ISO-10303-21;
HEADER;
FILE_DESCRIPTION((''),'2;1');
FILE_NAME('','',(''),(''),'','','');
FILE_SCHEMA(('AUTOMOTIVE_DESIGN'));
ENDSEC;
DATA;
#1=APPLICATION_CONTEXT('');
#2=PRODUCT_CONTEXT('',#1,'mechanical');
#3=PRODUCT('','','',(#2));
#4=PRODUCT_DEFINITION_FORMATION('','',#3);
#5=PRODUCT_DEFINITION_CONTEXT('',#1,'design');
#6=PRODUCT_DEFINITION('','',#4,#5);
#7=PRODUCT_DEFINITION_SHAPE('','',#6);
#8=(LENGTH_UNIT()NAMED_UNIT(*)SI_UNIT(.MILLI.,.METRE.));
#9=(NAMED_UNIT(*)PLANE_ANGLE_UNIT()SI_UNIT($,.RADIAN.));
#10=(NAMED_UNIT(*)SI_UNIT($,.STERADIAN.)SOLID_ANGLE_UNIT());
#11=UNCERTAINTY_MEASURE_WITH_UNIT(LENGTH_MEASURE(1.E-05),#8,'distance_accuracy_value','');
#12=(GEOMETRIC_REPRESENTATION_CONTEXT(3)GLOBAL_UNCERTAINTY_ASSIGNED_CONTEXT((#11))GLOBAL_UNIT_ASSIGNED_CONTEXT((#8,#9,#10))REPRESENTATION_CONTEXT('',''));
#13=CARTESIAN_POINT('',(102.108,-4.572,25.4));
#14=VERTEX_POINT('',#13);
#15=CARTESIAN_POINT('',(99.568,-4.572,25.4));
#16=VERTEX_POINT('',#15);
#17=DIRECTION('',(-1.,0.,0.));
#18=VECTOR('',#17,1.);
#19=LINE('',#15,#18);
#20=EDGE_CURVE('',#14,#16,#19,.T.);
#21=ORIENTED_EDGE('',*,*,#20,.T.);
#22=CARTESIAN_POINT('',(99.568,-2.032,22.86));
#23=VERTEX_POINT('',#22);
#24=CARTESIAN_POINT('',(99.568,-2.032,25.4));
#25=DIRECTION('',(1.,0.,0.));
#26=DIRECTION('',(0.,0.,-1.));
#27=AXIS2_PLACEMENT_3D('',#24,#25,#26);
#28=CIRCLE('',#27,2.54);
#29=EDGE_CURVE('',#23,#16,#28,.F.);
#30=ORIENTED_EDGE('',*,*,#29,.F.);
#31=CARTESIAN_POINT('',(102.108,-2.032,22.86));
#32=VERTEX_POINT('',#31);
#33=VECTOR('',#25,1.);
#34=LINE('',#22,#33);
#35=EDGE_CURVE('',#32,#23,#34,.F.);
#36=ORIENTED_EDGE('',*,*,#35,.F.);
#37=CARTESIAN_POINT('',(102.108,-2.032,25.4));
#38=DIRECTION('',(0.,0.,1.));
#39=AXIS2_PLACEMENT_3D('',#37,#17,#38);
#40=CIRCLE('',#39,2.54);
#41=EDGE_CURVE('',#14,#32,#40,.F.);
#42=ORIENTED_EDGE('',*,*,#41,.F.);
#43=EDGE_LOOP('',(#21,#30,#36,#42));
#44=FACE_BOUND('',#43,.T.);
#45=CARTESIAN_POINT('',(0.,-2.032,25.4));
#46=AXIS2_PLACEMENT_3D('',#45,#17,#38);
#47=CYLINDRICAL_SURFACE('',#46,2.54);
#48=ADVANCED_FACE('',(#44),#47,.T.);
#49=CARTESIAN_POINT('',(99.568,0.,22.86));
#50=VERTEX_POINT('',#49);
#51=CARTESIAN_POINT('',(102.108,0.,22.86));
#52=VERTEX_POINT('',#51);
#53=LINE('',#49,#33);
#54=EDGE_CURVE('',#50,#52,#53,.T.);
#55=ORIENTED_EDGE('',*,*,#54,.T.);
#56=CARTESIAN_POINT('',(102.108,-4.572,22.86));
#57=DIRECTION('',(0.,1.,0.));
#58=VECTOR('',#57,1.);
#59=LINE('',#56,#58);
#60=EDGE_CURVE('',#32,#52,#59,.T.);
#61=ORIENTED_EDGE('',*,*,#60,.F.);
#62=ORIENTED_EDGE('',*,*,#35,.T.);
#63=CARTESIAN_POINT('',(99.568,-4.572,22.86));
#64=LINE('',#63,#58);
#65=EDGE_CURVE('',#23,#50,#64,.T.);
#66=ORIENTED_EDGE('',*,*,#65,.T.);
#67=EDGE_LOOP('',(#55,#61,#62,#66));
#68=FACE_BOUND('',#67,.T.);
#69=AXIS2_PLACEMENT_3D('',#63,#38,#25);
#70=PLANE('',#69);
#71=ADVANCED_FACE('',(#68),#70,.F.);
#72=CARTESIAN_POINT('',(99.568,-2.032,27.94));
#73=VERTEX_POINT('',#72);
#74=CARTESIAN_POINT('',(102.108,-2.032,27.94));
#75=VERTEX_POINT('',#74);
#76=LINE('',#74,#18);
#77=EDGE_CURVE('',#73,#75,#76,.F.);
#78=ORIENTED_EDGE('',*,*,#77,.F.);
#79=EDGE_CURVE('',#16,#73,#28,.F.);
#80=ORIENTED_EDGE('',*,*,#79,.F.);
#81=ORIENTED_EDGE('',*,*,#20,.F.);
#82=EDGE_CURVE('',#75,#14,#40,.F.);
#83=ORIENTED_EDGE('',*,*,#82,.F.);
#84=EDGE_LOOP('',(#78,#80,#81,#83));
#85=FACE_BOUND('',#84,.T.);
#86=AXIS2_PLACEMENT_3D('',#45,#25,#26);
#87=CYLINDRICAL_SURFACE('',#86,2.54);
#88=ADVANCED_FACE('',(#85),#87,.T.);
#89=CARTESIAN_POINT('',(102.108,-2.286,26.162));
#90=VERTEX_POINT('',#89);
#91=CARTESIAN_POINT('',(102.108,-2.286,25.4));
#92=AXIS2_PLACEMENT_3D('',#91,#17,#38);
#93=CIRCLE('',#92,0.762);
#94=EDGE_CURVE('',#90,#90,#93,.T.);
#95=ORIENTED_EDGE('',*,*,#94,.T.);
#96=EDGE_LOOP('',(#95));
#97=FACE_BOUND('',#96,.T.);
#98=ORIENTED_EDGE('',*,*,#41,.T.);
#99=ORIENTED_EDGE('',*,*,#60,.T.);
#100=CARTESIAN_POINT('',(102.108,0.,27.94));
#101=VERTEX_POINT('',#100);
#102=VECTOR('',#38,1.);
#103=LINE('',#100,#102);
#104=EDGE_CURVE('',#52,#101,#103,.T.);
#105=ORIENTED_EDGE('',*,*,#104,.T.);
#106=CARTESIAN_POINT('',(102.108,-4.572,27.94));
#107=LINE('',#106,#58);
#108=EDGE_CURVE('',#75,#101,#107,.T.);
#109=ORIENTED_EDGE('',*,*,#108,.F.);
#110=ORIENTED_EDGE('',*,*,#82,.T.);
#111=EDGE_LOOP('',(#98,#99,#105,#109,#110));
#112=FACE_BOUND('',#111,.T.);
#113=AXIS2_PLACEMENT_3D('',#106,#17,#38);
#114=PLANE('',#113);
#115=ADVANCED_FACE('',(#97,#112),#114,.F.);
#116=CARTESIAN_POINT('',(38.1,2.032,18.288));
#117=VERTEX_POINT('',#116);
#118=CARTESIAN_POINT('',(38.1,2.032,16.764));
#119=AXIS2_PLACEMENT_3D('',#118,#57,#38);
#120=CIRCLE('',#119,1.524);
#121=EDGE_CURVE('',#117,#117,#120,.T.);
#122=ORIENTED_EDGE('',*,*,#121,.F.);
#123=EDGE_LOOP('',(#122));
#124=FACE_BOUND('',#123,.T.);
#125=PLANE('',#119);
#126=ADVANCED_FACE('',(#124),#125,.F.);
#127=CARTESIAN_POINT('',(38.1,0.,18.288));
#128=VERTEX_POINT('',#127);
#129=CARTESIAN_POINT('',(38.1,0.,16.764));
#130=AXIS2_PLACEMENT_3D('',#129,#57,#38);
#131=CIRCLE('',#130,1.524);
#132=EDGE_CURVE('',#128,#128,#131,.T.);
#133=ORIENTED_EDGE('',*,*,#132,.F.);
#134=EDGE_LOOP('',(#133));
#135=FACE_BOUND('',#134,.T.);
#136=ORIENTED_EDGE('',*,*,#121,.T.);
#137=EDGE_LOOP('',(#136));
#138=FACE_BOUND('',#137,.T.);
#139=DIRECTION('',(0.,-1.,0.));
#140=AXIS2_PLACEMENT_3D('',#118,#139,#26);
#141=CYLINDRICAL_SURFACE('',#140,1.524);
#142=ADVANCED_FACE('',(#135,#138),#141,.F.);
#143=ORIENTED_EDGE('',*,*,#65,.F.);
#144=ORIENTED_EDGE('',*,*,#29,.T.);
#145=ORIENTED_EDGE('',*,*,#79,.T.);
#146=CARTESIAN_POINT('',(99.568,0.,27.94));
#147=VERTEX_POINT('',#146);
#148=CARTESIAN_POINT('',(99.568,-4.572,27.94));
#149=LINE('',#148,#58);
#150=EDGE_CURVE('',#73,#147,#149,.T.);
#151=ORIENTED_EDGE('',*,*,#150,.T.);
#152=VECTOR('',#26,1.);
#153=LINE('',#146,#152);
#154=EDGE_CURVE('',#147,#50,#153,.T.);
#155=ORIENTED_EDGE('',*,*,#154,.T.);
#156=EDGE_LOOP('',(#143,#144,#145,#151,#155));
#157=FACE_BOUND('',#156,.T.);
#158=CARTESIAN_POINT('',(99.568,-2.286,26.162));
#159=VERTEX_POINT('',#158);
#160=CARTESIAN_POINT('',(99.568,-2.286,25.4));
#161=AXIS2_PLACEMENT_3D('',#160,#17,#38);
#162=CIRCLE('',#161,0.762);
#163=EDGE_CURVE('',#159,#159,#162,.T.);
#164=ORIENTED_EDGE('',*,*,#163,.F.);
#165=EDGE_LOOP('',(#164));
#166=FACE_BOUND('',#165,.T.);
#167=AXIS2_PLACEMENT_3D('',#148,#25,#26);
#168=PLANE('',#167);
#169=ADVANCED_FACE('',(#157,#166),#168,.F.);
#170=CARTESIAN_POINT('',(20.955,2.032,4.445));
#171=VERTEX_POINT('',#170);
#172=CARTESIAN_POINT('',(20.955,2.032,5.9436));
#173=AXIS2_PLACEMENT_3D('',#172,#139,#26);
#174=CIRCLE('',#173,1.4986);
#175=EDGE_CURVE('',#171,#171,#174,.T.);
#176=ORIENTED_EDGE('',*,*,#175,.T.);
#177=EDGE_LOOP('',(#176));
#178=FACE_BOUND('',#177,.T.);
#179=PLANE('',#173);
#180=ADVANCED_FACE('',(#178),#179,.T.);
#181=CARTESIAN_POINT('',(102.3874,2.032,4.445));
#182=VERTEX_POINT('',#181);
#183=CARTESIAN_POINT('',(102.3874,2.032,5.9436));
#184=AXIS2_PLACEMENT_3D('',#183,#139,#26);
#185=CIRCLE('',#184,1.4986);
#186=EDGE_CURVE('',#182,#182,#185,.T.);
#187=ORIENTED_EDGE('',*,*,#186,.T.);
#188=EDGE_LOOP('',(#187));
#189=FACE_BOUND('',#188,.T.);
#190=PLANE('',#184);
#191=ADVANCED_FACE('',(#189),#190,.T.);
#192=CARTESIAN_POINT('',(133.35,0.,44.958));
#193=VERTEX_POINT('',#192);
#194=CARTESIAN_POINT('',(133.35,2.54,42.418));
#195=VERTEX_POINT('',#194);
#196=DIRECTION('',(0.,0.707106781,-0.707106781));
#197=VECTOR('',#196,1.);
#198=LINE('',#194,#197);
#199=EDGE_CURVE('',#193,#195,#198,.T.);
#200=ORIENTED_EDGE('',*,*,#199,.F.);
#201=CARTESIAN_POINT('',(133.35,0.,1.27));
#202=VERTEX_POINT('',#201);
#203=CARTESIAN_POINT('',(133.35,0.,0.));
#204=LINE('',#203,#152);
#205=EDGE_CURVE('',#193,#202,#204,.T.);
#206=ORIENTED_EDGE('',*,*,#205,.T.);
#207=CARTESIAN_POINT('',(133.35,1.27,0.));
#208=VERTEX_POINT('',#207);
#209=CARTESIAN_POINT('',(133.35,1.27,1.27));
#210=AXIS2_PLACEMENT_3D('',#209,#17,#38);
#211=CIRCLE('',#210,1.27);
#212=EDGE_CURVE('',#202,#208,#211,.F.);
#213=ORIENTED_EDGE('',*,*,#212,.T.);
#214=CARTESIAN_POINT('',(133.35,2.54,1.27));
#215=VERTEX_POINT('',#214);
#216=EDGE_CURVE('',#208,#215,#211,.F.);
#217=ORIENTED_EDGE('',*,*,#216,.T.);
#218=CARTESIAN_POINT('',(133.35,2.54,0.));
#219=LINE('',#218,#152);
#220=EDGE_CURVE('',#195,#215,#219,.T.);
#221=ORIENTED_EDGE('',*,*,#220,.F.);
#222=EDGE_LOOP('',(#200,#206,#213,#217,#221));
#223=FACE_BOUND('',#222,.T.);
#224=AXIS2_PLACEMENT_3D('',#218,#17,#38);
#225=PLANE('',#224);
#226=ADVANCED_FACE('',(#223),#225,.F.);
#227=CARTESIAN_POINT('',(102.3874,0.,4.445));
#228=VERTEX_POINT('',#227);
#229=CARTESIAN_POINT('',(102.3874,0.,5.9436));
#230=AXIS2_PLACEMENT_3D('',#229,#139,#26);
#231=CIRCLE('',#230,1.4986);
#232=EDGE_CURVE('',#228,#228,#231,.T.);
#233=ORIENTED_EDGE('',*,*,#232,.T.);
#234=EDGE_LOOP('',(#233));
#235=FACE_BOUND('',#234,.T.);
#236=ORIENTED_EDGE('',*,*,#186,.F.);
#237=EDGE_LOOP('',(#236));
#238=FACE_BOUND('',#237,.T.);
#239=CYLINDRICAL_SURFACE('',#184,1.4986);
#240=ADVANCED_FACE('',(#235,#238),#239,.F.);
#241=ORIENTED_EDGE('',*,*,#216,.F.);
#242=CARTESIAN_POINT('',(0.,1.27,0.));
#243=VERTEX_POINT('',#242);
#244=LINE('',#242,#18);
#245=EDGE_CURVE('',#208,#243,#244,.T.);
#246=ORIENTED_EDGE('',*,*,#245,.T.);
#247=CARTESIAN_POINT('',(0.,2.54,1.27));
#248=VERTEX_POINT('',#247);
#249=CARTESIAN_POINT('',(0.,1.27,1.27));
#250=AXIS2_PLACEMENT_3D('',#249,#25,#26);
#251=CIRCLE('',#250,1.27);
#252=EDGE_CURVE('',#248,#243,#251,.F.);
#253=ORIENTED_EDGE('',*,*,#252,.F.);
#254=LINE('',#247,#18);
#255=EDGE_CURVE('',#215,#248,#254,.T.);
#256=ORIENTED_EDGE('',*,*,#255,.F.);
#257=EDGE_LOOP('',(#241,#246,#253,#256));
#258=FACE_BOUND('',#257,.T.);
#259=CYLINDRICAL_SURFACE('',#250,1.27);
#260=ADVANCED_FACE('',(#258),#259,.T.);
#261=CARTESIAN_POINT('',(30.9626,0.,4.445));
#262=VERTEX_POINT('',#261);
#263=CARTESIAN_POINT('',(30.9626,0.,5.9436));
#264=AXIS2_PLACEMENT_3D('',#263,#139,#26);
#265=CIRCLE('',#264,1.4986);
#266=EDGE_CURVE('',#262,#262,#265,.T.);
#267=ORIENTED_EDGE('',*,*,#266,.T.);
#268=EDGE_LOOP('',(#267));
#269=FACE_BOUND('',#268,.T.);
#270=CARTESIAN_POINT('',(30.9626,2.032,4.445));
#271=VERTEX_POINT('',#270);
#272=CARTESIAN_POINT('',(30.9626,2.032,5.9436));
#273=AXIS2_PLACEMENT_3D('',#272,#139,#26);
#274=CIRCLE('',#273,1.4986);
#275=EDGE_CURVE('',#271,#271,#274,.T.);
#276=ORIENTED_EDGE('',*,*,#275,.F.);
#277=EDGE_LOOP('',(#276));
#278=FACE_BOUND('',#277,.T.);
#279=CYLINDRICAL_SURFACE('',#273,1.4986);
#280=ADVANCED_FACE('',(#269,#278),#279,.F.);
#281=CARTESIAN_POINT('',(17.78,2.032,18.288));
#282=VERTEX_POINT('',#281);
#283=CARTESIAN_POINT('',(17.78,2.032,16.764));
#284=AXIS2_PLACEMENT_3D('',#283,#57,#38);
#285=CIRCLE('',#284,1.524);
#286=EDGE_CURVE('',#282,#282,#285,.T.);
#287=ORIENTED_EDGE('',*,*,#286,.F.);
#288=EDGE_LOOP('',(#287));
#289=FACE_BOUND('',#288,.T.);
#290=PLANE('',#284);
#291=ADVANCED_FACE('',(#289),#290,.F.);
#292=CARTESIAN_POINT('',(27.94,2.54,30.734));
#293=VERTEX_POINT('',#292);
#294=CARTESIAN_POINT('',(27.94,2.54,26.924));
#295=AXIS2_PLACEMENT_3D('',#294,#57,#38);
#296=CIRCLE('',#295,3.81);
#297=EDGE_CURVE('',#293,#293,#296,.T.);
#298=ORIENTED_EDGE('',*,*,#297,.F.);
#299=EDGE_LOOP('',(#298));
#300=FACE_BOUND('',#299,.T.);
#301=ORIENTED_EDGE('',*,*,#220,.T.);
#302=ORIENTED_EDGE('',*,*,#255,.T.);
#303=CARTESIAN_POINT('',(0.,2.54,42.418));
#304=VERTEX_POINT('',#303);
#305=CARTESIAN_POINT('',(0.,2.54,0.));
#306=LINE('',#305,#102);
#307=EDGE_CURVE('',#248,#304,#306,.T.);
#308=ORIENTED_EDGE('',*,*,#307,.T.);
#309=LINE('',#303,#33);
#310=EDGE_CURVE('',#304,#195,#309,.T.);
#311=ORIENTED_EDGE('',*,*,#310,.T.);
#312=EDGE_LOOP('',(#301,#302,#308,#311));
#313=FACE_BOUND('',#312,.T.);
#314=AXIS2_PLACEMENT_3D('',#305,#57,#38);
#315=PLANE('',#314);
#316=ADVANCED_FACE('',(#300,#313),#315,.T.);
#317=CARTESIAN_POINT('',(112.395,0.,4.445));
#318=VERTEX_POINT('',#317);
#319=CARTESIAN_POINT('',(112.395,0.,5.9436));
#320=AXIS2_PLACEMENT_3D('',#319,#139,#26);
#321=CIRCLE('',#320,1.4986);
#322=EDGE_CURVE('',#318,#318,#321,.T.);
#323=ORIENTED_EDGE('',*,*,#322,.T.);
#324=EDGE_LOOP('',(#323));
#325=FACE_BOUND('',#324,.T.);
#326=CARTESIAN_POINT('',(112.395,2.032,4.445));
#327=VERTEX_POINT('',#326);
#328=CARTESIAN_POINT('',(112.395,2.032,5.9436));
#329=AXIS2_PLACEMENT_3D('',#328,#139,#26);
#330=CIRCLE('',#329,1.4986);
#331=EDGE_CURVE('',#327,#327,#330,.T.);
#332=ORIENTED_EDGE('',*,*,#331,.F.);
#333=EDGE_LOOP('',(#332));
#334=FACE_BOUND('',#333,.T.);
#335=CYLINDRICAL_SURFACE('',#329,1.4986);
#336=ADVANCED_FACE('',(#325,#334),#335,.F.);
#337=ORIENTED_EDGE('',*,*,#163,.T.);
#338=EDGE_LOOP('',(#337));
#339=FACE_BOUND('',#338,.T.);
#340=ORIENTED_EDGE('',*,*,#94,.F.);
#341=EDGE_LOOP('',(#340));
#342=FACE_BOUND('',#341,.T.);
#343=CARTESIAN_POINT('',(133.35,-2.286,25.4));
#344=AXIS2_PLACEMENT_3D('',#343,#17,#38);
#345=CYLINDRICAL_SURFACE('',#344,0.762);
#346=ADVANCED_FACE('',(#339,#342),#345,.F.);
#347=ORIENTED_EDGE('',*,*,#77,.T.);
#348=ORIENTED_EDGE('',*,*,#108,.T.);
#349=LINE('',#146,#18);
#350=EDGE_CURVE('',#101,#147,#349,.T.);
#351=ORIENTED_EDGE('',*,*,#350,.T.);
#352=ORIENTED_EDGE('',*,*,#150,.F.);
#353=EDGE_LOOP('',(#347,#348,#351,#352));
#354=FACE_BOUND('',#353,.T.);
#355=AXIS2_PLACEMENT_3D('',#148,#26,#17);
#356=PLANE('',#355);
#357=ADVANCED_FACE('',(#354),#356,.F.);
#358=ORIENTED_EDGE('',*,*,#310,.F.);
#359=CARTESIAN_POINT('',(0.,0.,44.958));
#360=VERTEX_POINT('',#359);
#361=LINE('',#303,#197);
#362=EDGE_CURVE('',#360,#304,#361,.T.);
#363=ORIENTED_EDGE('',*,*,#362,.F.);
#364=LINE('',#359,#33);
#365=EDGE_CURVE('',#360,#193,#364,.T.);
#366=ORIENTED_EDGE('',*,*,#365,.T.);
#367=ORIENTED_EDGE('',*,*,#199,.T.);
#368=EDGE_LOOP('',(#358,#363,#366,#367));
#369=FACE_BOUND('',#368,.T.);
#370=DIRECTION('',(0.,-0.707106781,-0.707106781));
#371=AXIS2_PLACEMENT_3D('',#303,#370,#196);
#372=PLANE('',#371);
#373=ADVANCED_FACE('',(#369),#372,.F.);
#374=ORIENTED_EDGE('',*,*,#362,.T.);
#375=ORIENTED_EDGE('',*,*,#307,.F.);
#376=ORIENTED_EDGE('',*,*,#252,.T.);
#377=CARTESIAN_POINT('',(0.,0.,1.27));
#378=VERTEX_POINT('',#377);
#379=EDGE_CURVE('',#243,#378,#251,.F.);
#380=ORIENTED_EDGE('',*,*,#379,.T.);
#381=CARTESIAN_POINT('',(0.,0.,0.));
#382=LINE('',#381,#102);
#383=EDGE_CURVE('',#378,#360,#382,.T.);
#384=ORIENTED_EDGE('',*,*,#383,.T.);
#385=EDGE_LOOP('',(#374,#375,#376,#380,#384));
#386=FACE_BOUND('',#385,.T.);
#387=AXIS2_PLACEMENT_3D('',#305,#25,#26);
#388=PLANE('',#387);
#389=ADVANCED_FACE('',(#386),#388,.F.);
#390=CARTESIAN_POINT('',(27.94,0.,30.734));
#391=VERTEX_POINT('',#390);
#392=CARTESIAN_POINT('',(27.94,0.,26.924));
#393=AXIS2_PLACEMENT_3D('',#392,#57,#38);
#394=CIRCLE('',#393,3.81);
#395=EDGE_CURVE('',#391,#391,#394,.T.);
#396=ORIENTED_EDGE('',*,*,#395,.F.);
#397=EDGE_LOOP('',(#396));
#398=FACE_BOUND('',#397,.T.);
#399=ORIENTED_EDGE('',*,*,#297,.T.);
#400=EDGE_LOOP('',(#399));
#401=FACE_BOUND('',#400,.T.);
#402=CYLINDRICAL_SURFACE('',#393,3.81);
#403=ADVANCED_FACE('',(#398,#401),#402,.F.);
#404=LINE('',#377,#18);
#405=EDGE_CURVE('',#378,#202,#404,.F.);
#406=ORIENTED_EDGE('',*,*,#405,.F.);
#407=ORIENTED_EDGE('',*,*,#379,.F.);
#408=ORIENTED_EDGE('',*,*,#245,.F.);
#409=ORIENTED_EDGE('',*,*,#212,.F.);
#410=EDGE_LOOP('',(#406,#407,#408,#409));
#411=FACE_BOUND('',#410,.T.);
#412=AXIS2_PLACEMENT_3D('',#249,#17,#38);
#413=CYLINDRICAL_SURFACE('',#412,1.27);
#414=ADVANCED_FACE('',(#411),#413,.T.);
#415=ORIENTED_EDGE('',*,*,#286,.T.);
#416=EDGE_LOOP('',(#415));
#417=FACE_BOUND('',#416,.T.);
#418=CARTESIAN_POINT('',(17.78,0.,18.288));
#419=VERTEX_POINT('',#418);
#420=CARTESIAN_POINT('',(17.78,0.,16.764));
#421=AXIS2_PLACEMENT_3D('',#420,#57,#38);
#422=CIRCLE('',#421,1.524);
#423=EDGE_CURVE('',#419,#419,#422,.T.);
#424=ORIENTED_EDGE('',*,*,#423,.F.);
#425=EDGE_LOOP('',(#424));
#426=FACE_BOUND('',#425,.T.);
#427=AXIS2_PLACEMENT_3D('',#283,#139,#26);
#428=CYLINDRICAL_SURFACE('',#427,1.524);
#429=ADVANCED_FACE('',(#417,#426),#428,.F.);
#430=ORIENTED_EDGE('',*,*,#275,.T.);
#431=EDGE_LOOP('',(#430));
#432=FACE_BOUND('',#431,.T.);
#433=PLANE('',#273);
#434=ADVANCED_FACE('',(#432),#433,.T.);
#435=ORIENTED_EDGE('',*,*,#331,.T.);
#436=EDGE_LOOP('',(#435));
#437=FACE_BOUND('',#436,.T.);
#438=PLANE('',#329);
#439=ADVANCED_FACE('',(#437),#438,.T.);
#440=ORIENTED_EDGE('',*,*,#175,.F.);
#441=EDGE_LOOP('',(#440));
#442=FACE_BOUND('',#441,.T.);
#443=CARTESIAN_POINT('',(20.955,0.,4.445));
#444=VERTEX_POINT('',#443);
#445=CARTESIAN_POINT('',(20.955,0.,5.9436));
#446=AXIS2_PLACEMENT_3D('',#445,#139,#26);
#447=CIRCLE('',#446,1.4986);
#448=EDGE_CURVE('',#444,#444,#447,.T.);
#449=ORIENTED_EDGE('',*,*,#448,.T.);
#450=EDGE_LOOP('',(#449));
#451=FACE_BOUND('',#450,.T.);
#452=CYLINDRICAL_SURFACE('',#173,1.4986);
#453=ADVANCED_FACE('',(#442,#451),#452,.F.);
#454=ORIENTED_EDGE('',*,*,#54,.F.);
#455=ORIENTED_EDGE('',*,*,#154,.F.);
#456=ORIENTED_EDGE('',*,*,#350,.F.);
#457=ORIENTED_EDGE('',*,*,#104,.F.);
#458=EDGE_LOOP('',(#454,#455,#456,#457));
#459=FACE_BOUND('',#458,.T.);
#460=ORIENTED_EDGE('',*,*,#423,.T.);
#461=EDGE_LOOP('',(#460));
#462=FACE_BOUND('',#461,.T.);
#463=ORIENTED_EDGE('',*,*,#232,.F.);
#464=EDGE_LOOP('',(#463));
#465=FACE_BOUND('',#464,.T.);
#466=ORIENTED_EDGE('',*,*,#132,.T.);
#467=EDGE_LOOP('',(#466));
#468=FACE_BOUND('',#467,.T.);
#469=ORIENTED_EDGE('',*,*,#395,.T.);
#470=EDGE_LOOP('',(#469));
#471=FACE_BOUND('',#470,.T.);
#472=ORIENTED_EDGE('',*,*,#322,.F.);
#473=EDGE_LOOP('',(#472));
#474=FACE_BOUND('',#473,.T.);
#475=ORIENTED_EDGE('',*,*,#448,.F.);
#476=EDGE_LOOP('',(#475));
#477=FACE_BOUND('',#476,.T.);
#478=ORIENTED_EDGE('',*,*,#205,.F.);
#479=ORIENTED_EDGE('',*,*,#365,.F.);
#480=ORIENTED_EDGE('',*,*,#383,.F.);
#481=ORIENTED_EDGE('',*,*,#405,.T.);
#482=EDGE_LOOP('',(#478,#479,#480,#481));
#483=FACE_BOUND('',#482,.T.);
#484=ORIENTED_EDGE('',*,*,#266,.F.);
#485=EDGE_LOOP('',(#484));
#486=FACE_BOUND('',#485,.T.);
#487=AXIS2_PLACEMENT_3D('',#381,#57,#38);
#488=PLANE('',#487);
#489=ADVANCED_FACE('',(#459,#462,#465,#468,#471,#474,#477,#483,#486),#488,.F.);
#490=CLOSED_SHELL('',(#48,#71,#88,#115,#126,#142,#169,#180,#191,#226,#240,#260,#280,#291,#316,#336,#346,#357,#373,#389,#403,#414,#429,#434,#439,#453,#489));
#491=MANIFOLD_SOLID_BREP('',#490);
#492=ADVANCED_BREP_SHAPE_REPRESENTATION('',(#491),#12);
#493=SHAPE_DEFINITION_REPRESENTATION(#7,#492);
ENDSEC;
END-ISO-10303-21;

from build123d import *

# Parameters (mm, degrees)
SKETCH1_W           = 133.35
SKETCH1_H           = 44.958
BOSS_EXTRUDE1_DEPTH = 2.54
CUT_EXTRUDE1_DEPTH  = 141.747631824
SKETCH6_R           = 3.81
CUT_EXTRUDE3_DEPTH  = 141.747631824
SKETCH7_W           = 2.54
SKETCH7_H           = 5.08
BOSS_EXTRUDE2_DEPTH = 4.572
SKETCH9_R           = 0.762
CUT_EXTRUDE4_DEPTH  = 110.343091103
FILLET2_R           = 2.54
FILLET3_R           = 2.54
FILLET4_R           = 1.27
SKETCH16_R          = 1.4986
CUT_EXTRUDE8_DEPTH  = 2.032
SKETCH17_R          = 1.524
CUT_EXTRUDE9_DEPTH  = 2.032


with BuildPart() as part:
    # Sketch1 → Boss-Extrude1 (new body)
    with BuildSketch(Plane(origin=(0, 0, 0), x_dir=(1, 0, 0), z_dir=(0, 1, 0))):
        with Locations((66.675, -22.479)):
            Rectangle(SKETCH1_W, SKETCH1_H)
    extrude(amount=BOSS_EXTRUDE1_DEPTH)

    # Sketch2 → Cut-Extrude1 (cut, through all)
    with BuildSketch(Plane(origin=(133.35, 0, 0), x_dir=(0, 0, -1), z_dir=(1, 0, 0))):
        Polygon((-44.958, 0), (-44.958, 2.54), (-42.418, 2.54), align=None)
    extrude(amount=-CUT_EXTRUDE1_DEPTH, mode=Mode.SUBTRACT)

    # Sketch6 → Cut-Extrude3 (cut, through all)
    with BuildSketch(Plane(origin=(0, 2.54, 0), x_dir=(1, 0, 0), z_dir=(0, 1, 0))):
        with Locations(Location((27.94, -26.924, 0), (0, 0, 270))):
            Circle(SKETCH6_R)
    extrude(amount=-CUT_EXTRUDE3_DEPTH, mode=Mode.SUBTRACT)

    # Sketch7 → Boss-Extrude2 (add)
    with BuildSketch(Plane.XZ):
        with Locations((100.838, 25.4)):
            Rectangle(SKETCH7_W, SKETCH7_H)
    extrude(amount=BOSS_EXTRUDE2_DEPTH)

    # Sketch9 → Cut-Extrude4 (cut, through all)
    with BuildSketch(Plane.ZY.offset(-99.568)):
        with Locations((25.4, -2.286)):
            Circle(SKETCH9_R)
    extrude(amount=-CUT_EXTRUDE4_DEPTH, mode=Mode.SUBTRACT)

    # Fillet2
    fillet2_edges = [part.edges().sort_by_distance(p)[0] for p in [
        (100.838, -4.572, 27.94),
    ]]
    fillet(fillet2_edges, radius=FILLET2_R)

    # Fillet3
    fillet3_edges = [part.edges().sort_by_distance(p)[0] for p in [
        (100.838, -4.572, 22.86),
    ]]
    fillet(fillet3_edges, radius=FILLET3_R - 0.0001)  # a hair under: the kernel refuses the full size

    # Fillet4
    fillet4_edges = [part.edges().sort_by_distance(p)[0] for p in [
        (66.675, 0, 0),
        (66.675, 2.54, 0),
    ]]
    fillet(fillet4_edges, radius=FILLET4_R - 0.0001)  # a hair under: the kernel refuses the full size

    # Sketch16 → Cut-Extrude8 (cut)
    with BuildSketch(Plane.XZ):
        with Locations(Location((20.955, 5.9436, 0), (0, 0, 270))):
            Circle(SKETCH16_R)
        with Locations(Location((30.9626, 5.9436, 0), (0, 0, 270))):
            Circle(SKETCH16_R)
        with Locations(Location((102.3874, 5.9436, 0), (0, 0, 270))):
            Circle(SKETCH16_R)
        with Locations(Location((112.395, 5.9436, 0), (0, 0, 270))):
            Circle(SKETCH16_R)
    extrude(amount=-CUT_EXTRUDE8_DEPTH, mode=Mode.SUBTRACT)

    # Sketch17 → Cut-Extrude9 (cut)
    with BuildSketch(Plane(origin=(0, 0, 0), x_dir=(1, 0, 0), z_dir=(0, 1, 0))):
        with Locations(Location((38.1, -16.764, 0), (0, 0, 270))):
            Circle(SKETCH17_R)
        with Locations(Location((17.78, -16.764, 0), (0, 0, 270))):
            Circle(SKETCH17_R)
    extrude(amount=CUT_EXTRUDE9_DEPTH, mode=Mode.SUBTRACT)


solid = part.part
